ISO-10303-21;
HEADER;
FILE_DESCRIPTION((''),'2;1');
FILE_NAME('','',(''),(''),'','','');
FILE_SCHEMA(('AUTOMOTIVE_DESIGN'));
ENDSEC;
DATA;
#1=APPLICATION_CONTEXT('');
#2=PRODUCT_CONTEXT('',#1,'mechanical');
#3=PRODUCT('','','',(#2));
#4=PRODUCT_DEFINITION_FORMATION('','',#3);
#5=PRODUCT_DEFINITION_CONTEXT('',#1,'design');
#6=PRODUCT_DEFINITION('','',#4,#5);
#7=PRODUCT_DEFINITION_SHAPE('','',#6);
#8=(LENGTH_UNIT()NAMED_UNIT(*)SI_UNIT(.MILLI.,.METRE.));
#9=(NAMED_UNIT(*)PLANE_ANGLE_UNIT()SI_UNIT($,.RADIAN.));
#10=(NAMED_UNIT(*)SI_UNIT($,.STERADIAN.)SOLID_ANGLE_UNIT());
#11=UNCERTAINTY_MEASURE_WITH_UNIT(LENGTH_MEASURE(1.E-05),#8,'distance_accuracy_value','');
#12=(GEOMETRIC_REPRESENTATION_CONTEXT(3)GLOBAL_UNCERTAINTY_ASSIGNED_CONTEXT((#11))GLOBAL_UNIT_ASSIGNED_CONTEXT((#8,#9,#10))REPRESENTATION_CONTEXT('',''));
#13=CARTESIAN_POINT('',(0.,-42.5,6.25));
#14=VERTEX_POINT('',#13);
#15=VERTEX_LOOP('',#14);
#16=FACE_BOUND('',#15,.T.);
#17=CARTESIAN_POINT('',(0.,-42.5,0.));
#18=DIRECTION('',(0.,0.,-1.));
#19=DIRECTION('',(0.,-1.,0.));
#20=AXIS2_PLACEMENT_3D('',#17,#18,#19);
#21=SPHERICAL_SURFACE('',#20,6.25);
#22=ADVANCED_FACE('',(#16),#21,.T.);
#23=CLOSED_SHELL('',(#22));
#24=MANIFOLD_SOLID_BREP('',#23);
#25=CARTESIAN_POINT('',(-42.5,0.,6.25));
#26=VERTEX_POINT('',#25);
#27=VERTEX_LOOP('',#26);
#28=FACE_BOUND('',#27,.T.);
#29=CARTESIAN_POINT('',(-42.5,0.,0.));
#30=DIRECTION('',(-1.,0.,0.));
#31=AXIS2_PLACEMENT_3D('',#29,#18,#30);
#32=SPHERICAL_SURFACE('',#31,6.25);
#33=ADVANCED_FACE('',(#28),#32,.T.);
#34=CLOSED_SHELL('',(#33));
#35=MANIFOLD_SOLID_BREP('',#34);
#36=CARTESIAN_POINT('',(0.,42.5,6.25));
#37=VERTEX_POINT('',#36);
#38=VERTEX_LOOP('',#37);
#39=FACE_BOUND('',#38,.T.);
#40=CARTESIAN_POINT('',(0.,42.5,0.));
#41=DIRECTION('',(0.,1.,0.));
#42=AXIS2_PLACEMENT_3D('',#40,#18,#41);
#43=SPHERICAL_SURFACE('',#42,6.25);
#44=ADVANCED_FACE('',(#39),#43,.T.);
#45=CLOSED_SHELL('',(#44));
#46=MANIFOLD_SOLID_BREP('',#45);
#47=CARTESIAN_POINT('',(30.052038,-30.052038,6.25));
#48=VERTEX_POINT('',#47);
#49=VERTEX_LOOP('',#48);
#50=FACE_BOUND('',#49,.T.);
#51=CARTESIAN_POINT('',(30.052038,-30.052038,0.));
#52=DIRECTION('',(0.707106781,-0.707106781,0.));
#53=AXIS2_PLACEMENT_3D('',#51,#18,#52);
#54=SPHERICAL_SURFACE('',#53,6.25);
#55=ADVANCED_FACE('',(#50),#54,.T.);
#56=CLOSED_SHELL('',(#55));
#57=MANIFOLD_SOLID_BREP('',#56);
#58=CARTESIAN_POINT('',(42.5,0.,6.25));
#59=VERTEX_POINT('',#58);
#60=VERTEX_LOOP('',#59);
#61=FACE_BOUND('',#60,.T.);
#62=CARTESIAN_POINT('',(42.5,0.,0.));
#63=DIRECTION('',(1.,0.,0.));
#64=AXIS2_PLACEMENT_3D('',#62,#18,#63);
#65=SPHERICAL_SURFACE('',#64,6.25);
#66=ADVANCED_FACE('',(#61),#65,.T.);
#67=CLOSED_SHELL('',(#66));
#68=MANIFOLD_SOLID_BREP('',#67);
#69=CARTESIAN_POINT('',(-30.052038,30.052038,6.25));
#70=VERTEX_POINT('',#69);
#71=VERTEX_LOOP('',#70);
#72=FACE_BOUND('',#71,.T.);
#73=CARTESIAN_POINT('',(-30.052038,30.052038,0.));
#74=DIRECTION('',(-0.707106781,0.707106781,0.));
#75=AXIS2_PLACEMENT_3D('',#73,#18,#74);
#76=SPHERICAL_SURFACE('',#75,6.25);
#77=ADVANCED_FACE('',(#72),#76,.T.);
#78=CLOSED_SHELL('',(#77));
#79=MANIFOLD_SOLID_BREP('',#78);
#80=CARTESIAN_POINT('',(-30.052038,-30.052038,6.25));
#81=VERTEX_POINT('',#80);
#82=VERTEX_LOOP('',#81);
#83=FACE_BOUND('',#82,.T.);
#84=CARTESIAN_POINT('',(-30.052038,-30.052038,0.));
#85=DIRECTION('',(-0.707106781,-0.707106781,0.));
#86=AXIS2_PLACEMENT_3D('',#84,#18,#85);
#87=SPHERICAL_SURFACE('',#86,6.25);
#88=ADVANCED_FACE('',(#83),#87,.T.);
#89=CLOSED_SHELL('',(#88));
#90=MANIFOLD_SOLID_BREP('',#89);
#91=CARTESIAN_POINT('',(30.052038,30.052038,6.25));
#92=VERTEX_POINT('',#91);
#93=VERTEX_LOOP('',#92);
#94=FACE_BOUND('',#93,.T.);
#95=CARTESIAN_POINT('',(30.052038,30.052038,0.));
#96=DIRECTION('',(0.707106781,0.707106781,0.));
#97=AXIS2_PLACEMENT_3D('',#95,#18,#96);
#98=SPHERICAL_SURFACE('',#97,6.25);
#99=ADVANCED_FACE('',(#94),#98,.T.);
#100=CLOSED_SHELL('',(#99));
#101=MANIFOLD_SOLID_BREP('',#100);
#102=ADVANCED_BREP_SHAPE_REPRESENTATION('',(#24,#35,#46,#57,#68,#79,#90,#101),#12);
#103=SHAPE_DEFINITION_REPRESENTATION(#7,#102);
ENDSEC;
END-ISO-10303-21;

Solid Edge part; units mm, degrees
sketch "Sketch1" plane through (0, 0, 0) normal (0, -1, 0) x (1, 0, 0)
  arc A0 (42.5, 6.25) -> (42.5, -6.25) centre (42.5, 0) cw
  dimension "D1" = 6.25
revolve "RevolvedProtrusion1" add sketch "Sketch1" angle 360 about axis through (42.5, 0, 6.25) along (0, 0, -1)
pattern_circular "Pattern1" count 8 over 360 about axis through (0, 0, 0) along (0, 0, -1) of "RevolvedProtrusion1"
properties material "Stainless steel"
